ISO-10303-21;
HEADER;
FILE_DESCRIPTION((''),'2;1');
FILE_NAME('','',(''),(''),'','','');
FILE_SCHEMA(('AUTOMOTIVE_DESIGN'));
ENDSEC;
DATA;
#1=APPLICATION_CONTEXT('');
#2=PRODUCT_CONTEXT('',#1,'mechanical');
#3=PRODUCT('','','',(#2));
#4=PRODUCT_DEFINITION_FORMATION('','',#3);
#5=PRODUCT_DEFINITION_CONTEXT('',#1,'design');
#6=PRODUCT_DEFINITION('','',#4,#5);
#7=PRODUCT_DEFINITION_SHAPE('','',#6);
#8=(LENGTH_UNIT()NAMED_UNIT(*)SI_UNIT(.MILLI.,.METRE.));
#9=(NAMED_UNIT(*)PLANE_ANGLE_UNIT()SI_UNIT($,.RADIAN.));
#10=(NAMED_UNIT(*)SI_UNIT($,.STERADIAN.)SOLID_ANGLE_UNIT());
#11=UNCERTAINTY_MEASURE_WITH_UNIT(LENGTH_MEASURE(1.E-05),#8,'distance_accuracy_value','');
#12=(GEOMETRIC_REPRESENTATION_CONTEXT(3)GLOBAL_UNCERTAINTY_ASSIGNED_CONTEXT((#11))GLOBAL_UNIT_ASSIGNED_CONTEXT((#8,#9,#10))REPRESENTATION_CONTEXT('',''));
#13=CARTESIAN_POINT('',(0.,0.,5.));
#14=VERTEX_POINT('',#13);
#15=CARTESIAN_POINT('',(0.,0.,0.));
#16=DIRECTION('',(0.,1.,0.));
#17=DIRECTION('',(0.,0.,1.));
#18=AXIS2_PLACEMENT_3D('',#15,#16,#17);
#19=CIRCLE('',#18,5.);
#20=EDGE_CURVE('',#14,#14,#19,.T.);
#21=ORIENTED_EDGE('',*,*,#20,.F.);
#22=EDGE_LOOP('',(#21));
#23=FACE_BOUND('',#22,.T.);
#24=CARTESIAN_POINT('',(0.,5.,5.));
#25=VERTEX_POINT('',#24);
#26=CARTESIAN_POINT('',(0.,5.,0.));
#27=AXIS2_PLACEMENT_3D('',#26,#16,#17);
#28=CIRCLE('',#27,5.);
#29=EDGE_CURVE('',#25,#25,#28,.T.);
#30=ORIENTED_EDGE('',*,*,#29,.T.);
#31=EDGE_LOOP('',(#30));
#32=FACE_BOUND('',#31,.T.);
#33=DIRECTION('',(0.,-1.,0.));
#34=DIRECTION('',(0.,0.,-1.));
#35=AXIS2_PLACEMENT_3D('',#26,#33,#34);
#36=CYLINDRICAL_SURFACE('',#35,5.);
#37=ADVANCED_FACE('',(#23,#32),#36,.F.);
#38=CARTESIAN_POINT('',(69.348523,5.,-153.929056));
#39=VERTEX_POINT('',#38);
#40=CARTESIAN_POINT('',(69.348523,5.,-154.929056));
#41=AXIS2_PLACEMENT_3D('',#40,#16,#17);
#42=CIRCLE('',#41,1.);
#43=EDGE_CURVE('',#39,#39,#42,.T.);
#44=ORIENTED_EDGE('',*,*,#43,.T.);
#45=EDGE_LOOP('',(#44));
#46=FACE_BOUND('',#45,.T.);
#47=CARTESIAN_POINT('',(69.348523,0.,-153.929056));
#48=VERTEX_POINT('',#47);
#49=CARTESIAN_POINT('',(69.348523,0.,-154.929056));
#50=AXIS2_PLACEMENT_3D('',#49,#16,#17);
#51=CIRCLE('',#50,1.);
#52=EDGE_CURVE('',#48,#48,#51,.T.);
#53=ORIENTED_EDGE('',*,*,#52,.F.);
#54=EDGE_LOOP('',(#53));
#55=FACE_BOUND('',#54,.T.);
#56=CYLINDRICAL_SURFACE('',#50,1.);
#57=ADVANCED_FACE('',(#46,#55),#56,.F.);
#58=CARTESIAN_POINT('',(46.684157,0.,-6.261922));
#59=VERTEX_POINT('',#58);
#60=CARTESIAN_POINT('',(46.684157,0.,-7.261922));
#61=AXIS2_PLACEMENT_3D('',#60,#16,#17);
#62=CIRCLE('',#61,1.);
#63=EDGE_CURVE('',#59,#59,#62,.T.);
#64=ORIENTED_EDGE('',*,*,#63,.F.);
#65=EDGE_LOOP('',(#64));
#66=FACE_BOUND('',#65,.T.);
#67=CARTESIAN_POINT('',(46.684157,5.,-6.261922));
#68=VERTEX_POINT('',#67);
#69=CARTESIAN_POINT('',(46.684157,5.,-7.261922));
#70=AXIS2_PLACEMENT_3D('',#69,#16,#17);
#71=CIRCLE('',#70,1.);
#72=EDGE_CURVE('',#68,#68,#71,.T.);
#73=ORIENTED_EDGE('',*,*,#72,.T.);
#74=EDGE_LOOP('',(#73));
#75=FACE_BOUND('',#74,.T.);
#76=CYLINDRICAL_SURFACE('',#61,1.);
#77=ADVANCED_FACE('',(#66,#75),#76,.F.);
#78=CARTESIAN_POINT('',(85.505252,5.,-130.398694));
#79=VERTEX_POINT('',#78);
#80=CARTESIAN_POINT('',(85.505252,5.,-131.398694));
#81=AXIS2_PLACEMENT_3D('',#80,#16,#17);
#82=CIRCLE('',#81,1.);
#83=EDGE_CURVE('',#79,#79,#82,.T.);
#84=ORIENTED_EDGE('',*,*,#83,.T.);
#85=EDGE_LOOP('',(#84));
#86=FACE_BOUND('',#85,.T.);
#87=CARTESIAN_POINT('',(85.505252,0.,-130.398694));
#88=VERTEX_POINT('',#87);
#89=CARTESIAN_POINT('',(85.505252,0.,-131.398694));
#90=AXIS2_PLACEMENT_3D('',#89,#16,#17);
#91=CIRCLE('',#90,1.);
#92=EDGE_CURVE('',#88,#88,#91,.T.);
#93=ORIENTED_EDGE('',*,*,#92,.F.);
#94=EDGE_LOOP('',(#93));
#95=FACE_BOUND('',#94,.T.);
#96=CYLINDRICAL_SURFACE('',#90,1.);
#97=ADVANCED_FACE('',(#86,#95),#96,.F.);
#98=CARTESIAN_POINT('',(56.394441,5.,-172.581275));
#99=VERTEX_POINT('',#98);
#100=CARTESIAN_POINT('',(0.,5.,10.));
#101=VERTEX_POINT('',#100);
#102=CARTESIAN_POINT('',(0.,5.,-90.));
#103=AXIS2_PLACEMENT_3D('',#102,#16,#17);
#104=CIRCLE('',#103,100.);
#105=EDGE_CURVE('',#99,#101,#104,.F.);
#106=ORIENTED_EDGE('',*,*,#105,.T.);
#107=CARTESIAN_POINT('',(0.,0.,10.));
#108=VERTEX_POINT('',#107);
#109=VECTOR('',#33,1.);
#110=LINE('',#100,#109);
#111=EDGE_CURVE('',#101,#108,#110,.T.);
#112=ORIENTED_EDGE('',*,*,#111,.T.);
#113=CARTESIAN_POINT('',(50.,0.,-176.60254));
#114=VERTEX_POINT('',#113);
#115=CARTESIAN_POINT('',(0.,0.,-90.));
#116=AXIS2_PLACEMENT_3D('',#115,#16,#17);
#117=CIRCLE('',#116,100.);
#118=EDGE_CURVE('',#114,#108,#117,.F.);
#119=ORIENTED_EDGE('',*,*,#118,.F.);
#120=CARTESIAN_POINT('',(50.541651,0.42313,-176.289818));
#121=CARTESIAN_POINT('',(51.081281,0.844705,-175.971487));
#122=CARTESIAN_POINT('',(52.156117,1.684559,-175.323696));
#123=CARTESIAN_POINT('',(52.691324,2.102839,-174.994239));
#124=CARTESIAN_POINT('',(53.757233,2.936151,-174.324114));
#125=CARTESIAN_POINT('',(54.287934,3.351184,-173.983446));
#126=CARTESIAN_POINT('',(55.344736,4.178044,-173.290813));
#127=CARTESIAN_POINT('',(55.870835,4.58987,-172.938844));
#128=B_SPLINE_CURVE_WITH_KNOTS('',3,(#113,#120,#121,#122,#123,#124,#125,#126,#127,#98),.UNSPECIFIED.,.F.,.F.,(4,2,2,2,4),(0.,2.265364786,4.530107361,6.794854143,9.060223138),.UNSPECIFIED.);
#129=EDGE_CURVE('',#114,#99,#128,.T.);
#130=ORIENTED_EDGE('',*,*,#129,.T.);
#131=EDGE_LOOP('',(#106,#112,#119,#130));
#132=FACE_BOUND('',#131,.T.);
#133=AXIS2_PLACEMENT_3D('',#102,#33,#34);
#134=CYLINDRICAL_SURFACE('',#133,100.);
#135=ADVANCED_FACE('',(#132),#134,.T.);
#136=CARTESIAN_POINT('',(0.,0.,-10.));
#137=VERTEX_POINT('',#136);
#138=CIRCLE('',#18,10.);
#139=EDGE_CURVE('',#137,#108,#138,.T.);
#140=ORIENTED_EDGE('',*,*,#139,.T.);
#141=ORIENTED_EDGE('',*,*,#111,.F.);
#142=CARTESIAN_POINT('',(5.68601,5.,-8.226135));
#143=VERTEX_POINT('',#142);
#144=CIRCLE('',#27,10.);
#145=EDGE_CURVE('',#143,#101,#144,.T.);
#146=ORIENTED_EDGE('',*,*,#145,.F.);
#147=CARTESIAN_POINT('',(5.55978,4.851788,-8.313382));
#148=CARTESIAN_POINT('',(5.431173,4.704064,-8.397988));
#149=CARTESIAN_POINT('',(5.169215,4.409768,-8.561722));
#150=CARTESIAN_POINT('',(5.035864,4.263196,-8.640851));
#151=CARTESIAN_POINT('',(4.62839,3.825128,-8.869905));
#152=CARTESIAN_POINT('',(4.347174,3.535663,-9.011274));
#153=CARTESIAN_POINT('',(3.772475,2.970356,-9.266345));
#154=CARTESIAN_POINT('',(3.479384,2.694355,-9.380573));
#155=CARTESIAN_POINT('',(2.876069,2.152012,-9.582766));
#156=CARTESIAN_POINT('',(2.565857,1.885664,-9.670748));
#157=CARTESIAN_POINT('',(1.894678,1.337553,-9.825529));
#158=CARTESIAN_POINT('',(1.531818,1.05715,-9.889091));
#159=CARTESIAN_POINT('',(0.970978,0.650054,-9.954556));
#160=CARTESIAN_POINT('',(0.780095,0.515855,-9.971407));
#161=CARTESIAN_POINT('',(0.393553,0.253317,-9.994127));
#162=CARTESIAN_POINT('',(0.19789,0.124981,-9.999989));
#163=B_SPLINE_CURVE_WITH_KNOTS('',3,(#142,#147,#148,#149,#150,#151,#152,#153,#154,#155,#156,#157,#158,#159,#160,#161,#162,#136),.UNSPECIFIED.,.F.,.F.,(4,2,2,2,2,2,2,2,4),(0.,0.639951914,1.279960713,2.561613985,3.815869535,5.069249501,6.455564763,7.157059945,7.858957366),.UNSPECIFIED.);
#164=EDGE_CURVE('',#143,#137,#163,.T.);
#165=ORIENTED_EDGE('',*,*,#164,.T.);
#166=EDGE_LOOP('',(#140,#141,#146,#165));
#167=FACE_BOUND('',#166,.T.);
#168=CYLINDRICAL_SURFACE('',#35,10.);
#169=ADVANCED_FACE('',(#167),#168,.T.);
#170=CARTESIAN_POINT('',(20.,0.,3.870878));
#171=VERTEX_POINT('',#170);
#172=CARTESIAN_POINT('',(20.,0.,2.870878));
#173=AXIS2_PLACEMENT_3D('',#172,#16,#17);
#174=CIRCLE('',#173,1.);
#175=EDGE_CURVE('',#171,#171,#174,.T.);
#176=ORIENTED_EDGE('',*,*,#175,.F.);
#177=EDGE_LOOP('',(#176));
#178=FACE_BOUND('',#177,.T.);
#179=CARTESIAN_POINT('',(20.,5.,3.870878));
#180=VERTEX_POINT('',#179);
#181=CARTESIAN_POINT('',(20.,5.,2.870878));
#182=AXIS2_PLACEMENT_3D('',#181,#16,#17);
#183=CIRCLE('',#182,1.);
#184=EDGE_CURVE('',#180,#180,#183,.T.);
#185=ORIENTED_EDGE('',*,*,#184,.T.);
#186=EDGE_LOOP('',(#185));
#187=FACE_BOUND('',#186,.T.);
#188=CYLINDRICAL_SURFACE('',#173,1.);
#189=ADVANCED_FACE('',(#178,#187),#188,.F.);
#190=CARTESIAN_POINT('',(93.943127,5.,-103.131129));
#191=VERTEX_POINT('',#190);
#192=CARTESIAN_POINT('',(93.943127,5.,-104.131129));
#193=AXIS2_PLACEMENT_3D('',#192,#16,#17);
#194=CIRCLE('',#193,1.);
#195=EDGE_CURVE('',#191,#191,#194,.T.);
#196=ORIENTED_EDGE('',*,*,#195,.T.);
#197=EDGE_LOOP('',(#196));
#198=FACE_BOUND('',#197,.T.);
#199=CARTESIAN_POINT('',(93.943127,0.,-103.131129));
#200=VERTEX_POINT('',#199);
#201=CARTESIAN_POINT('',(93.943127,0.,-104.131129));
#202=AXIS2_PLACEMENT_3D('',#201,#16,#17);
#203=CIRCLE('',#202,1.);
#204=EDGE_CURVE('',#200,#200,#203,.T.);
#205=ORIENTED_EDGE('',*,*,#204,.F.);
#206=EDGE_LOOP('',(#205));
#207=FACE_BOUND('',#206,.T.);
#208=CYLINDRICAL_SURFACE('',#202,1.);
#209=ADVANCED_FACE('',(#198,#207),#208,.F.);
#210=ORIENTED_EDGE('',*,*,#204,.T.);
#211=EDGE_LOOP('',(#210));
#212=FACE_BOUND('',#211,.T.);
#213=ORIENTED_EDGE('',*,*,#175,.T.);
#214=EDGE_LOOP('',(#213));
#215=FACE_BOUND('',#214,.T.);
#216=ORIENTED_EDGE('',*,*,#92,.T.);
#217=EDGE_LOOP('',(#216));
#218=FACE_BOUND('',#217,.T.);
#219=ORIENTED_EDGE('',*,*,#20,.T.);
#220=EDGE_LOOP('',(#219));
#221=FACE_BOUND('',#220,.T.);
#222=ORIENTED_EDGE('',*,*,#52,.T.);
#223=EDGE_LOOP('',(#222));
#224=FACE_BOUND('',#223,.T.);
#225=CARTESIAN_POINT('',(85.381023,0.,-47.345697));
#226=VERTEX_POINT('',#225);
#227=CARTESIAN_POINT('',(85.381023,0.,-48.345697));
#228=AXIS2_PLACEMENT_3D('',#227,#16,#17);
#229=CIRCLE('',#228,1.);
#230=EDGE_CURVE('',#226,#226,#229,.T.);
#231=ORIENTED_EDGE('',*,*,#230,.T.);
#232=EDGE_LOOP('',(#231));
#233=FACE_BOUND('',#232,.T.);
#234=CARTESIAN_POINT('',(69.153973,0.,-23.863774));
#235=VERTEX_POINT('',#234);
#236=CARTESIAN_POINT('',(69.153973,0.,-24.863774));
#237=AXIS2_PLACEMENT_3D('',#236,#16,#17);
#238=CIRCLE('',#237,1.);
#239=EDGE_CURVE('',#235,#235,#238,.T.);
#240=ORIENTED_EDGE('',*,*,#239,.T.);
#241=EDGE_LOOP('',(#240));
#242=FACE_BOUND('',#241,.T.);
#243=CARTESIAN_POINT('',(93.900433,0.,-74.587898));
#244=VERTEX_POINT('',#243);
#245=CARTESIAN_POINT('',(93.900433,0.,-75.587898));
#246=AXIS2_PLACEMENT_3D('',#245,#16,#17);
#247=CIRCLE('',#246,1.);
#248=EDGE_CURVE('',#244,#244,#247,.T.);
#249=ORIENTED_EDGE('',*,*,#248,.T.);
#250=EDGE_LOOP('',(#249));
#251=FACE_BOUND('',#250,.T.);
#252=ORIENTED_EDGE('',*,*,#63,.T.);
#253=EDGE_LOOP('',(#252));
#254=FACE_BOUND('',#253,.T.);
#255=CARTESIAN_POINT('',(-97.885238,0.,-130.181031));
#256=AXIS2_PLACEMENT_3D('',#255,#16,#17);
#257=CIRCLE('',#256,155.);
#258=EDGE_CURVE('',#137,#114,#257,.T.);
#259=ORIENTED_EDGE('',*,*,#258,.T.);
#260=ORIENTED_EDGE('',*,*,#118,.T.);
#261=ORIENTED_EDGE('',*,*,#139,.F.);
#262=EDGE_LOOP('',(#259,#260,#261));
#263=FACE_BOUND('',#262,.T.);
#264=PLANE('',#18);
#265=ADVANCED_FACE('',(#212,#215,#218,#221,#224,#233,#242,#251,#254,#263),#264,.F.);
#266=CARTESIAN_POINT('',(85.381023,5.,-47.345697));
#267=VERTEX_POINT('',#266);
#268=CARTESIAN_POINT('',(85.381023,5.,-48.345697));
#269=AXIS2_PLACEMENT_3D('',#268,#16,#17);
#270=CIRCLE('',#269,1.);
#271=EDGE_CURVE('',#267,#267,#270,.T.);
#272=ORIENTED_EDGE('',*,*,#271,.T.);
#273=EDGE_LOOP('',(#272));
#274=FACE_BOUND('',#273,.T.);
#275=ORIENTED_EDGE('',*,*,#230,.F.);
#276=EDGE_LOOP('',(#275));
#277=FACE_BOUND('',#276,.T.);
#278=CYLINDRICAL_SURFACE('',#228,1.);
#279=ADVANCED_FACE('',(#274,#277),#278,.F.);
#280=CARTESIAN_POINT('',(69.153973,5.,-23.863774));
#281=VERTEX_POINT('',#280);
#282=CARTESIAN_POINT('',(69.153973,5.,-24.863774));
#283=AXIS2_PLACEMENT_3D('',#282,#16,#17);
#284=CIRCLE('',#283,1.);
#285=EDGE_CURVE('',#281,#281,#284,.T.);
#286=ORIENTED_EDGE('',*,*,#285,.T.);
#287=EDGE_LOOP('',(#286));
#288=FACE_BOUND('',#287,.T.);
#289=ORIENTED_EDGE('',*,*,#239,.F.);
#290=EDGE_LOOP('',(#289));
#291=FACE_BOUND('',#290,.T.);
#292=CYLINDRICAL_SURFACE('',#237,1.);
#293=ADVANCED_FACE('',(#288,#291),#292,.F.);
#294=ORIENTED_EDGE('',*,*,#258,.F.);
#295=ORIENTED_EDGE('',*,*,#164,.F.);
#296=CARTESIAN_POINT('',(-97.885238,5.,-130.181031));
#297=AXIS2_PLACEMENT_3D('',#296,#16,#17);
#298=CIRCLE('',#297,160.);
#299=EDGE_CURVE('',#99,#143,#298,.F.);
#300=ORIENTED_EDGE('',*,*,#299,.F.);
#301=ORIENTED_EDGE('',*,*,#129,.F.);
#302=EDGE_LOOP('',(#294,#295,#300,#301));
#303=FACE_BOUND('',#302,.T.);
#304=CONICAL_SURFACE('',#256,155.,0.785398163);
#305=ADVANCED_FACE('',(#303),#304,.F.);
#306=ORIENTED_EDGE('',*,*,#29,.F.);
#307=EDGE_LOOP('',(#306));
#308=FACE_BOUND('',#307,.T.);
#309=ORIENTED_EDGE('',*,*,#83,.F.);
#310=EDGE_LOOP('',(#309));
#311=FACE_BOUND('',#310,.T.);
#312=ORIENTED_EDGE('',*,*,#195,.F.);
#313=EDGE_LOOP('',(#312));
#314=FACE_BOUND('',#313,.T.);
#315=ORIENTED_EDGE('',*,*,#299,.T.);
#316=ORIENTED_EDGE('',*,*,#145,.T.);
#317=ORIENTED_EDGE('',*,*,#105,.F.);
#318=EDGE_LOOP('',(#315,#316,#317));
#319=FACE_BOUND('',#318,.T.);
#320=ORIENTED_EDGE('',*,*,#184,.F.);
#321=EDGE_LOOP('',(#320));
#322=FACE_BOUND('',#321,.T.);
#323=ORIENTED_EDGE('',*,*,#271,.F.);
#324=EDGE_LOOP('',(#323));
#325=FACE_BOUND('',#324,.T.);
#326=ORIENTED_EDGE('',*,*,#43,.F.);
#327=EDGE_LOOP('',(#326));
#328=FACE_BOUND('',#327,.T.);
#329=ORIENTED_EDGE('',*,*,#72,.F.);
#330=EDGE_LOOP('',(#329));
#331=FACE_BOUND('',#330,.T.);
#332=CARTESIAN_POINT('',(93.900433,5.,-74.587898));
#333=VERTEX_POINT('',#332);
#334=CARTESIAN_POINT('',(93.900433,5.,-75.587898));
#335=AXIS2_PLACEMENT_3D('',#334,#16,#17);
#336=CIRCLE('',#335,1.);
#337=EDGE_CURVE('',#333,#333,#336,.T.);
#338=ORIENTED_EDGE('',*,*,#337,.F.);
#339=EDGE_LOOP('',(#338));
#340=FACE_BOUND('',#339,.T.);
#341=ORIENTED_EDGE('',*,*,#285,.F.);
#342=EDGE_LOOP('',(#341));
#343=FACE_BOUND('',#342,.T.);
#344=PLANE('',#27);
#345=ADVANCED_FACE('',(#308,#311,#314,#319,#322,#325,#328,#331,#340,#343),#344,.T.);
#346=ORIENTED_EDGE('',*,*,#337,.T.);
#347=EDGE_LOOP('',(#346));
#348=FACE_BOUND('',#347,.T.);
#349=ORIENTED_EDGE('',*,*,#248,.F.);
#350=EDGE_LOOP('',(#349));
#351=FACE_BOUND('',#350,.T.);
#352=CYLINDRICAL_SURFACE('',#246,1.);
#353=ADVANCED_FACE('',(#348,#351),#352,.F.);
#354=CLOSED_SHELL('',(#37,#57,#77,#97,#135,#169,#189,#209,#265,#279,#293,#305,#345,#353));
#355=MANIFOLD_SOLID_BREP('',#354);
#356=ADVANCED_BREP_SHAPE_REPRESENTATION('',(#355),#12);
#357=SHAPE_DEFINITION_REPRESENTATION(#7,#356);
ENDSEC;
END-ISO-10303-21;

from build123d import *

# Parameters (mm, degrees)
IZIM1_R                     = 10
IZIM1_R_2                   = 5
Y_KSEKLIK_EKSTR_ZYON1_DEPTH = 5
PAH1_SIZE                   = 5
IZIM2_R                     = 1
KANCA_DELIKLERI_DEPTH       = 204.010978335


with BuildPart() as part:
    # Çizim1 → Yükseklik-Ekstrüzyon1 (new body)
    # profile 1 of 2: a face of its own
    with BuildSketch(Plane(origin=(0, 0, 0), x_dir=(1, 0, 0), z_dir=(0, 1, 0))):
        Circle(IZIM1_R)
        with Locations(Location((0, 0, 0), (0, 0, 270))):
            Circle(IZIM1_R_2, mode=Mode.SUBTRACT)
    # profile 2 of 2: a face of its own
    with BuildSketch(Plane(origin=(0, 0, 0), x_dir=(1, 0, 0), z_dir=(0, 1, 0))):
        with BuildLine():
            ThreePointArc((2.57e-07, -10), (96.592582662, 64.118095614), (50, 176.602540378))
            ThreePointArc((50, 176.602540378), (50.573117628, 85.626381928), (0, 10))
            ThreePointArc((0, 10), (7.071067812, 7.071067812), (10, 0))
            ThreePointArc((10, 0), (7.071067903, -7.071067721), (2.57e-07, -10))
        make_face()
    extrude(amount=Y_KSEKLIK_EKSTR_ZYON1_DEPTH)

    # Pah1
    pah1_edges = [part.edges().sort_by_distance(p)[0] for p in [
        (50.573117628, 5, -85.626381928),
    ]]
    chamfer(pah1_edges, length=PAH1_SIZE - 0.0001)  # a hair under: the kernel refuses the full size

    # Çizim2 → kanca delikleri (cut, through all)
    with BuildSketch(Plane(origin=(0, 5, 0), x_dir=(1, 0, 0), z_dir=(0, 1, 0))):
        with Locations(Location((69.348523033, 154.929056309, 0), (0, 0, 270))):
            Circle(IZIM2_R)
        with Locations(Location((85.505252147, 131.398693884, 0), (0, 0, 270))):
            Circle(IZIM2_R)
        with Locations(Location((93.943127486, 104.131128696, 0), (0, 0, 270))):
            Circle(IZIM2_R)
        with Locations(Location((93.900432964, 75.587897823, 0), (0, 0, 270))):
            Circle(IZIM2_R)
        with Locations(Location((85.381022764, 48.345697079, 0), (0, 0, 270))):
            Circle(IZIM2_R)
        with Locations(Location((69.153973403, 24.863773807, 0), (0, 0, 270))):
            Circle(IZIM2_R)
        with Locations(Location((46.684156547, 7.261922143, 0), (0, 0, 270))):
            Circle(IZIM2_R)
        with Locations(Location((20, -2.870878105, 0), (0, 0, 270))):
            Circle(IZIM2_R)
    extrude(amount=-KANCA_DELIKLERI_DEPTH, mode=Mode.SUBTRACT)


solid = part.part
